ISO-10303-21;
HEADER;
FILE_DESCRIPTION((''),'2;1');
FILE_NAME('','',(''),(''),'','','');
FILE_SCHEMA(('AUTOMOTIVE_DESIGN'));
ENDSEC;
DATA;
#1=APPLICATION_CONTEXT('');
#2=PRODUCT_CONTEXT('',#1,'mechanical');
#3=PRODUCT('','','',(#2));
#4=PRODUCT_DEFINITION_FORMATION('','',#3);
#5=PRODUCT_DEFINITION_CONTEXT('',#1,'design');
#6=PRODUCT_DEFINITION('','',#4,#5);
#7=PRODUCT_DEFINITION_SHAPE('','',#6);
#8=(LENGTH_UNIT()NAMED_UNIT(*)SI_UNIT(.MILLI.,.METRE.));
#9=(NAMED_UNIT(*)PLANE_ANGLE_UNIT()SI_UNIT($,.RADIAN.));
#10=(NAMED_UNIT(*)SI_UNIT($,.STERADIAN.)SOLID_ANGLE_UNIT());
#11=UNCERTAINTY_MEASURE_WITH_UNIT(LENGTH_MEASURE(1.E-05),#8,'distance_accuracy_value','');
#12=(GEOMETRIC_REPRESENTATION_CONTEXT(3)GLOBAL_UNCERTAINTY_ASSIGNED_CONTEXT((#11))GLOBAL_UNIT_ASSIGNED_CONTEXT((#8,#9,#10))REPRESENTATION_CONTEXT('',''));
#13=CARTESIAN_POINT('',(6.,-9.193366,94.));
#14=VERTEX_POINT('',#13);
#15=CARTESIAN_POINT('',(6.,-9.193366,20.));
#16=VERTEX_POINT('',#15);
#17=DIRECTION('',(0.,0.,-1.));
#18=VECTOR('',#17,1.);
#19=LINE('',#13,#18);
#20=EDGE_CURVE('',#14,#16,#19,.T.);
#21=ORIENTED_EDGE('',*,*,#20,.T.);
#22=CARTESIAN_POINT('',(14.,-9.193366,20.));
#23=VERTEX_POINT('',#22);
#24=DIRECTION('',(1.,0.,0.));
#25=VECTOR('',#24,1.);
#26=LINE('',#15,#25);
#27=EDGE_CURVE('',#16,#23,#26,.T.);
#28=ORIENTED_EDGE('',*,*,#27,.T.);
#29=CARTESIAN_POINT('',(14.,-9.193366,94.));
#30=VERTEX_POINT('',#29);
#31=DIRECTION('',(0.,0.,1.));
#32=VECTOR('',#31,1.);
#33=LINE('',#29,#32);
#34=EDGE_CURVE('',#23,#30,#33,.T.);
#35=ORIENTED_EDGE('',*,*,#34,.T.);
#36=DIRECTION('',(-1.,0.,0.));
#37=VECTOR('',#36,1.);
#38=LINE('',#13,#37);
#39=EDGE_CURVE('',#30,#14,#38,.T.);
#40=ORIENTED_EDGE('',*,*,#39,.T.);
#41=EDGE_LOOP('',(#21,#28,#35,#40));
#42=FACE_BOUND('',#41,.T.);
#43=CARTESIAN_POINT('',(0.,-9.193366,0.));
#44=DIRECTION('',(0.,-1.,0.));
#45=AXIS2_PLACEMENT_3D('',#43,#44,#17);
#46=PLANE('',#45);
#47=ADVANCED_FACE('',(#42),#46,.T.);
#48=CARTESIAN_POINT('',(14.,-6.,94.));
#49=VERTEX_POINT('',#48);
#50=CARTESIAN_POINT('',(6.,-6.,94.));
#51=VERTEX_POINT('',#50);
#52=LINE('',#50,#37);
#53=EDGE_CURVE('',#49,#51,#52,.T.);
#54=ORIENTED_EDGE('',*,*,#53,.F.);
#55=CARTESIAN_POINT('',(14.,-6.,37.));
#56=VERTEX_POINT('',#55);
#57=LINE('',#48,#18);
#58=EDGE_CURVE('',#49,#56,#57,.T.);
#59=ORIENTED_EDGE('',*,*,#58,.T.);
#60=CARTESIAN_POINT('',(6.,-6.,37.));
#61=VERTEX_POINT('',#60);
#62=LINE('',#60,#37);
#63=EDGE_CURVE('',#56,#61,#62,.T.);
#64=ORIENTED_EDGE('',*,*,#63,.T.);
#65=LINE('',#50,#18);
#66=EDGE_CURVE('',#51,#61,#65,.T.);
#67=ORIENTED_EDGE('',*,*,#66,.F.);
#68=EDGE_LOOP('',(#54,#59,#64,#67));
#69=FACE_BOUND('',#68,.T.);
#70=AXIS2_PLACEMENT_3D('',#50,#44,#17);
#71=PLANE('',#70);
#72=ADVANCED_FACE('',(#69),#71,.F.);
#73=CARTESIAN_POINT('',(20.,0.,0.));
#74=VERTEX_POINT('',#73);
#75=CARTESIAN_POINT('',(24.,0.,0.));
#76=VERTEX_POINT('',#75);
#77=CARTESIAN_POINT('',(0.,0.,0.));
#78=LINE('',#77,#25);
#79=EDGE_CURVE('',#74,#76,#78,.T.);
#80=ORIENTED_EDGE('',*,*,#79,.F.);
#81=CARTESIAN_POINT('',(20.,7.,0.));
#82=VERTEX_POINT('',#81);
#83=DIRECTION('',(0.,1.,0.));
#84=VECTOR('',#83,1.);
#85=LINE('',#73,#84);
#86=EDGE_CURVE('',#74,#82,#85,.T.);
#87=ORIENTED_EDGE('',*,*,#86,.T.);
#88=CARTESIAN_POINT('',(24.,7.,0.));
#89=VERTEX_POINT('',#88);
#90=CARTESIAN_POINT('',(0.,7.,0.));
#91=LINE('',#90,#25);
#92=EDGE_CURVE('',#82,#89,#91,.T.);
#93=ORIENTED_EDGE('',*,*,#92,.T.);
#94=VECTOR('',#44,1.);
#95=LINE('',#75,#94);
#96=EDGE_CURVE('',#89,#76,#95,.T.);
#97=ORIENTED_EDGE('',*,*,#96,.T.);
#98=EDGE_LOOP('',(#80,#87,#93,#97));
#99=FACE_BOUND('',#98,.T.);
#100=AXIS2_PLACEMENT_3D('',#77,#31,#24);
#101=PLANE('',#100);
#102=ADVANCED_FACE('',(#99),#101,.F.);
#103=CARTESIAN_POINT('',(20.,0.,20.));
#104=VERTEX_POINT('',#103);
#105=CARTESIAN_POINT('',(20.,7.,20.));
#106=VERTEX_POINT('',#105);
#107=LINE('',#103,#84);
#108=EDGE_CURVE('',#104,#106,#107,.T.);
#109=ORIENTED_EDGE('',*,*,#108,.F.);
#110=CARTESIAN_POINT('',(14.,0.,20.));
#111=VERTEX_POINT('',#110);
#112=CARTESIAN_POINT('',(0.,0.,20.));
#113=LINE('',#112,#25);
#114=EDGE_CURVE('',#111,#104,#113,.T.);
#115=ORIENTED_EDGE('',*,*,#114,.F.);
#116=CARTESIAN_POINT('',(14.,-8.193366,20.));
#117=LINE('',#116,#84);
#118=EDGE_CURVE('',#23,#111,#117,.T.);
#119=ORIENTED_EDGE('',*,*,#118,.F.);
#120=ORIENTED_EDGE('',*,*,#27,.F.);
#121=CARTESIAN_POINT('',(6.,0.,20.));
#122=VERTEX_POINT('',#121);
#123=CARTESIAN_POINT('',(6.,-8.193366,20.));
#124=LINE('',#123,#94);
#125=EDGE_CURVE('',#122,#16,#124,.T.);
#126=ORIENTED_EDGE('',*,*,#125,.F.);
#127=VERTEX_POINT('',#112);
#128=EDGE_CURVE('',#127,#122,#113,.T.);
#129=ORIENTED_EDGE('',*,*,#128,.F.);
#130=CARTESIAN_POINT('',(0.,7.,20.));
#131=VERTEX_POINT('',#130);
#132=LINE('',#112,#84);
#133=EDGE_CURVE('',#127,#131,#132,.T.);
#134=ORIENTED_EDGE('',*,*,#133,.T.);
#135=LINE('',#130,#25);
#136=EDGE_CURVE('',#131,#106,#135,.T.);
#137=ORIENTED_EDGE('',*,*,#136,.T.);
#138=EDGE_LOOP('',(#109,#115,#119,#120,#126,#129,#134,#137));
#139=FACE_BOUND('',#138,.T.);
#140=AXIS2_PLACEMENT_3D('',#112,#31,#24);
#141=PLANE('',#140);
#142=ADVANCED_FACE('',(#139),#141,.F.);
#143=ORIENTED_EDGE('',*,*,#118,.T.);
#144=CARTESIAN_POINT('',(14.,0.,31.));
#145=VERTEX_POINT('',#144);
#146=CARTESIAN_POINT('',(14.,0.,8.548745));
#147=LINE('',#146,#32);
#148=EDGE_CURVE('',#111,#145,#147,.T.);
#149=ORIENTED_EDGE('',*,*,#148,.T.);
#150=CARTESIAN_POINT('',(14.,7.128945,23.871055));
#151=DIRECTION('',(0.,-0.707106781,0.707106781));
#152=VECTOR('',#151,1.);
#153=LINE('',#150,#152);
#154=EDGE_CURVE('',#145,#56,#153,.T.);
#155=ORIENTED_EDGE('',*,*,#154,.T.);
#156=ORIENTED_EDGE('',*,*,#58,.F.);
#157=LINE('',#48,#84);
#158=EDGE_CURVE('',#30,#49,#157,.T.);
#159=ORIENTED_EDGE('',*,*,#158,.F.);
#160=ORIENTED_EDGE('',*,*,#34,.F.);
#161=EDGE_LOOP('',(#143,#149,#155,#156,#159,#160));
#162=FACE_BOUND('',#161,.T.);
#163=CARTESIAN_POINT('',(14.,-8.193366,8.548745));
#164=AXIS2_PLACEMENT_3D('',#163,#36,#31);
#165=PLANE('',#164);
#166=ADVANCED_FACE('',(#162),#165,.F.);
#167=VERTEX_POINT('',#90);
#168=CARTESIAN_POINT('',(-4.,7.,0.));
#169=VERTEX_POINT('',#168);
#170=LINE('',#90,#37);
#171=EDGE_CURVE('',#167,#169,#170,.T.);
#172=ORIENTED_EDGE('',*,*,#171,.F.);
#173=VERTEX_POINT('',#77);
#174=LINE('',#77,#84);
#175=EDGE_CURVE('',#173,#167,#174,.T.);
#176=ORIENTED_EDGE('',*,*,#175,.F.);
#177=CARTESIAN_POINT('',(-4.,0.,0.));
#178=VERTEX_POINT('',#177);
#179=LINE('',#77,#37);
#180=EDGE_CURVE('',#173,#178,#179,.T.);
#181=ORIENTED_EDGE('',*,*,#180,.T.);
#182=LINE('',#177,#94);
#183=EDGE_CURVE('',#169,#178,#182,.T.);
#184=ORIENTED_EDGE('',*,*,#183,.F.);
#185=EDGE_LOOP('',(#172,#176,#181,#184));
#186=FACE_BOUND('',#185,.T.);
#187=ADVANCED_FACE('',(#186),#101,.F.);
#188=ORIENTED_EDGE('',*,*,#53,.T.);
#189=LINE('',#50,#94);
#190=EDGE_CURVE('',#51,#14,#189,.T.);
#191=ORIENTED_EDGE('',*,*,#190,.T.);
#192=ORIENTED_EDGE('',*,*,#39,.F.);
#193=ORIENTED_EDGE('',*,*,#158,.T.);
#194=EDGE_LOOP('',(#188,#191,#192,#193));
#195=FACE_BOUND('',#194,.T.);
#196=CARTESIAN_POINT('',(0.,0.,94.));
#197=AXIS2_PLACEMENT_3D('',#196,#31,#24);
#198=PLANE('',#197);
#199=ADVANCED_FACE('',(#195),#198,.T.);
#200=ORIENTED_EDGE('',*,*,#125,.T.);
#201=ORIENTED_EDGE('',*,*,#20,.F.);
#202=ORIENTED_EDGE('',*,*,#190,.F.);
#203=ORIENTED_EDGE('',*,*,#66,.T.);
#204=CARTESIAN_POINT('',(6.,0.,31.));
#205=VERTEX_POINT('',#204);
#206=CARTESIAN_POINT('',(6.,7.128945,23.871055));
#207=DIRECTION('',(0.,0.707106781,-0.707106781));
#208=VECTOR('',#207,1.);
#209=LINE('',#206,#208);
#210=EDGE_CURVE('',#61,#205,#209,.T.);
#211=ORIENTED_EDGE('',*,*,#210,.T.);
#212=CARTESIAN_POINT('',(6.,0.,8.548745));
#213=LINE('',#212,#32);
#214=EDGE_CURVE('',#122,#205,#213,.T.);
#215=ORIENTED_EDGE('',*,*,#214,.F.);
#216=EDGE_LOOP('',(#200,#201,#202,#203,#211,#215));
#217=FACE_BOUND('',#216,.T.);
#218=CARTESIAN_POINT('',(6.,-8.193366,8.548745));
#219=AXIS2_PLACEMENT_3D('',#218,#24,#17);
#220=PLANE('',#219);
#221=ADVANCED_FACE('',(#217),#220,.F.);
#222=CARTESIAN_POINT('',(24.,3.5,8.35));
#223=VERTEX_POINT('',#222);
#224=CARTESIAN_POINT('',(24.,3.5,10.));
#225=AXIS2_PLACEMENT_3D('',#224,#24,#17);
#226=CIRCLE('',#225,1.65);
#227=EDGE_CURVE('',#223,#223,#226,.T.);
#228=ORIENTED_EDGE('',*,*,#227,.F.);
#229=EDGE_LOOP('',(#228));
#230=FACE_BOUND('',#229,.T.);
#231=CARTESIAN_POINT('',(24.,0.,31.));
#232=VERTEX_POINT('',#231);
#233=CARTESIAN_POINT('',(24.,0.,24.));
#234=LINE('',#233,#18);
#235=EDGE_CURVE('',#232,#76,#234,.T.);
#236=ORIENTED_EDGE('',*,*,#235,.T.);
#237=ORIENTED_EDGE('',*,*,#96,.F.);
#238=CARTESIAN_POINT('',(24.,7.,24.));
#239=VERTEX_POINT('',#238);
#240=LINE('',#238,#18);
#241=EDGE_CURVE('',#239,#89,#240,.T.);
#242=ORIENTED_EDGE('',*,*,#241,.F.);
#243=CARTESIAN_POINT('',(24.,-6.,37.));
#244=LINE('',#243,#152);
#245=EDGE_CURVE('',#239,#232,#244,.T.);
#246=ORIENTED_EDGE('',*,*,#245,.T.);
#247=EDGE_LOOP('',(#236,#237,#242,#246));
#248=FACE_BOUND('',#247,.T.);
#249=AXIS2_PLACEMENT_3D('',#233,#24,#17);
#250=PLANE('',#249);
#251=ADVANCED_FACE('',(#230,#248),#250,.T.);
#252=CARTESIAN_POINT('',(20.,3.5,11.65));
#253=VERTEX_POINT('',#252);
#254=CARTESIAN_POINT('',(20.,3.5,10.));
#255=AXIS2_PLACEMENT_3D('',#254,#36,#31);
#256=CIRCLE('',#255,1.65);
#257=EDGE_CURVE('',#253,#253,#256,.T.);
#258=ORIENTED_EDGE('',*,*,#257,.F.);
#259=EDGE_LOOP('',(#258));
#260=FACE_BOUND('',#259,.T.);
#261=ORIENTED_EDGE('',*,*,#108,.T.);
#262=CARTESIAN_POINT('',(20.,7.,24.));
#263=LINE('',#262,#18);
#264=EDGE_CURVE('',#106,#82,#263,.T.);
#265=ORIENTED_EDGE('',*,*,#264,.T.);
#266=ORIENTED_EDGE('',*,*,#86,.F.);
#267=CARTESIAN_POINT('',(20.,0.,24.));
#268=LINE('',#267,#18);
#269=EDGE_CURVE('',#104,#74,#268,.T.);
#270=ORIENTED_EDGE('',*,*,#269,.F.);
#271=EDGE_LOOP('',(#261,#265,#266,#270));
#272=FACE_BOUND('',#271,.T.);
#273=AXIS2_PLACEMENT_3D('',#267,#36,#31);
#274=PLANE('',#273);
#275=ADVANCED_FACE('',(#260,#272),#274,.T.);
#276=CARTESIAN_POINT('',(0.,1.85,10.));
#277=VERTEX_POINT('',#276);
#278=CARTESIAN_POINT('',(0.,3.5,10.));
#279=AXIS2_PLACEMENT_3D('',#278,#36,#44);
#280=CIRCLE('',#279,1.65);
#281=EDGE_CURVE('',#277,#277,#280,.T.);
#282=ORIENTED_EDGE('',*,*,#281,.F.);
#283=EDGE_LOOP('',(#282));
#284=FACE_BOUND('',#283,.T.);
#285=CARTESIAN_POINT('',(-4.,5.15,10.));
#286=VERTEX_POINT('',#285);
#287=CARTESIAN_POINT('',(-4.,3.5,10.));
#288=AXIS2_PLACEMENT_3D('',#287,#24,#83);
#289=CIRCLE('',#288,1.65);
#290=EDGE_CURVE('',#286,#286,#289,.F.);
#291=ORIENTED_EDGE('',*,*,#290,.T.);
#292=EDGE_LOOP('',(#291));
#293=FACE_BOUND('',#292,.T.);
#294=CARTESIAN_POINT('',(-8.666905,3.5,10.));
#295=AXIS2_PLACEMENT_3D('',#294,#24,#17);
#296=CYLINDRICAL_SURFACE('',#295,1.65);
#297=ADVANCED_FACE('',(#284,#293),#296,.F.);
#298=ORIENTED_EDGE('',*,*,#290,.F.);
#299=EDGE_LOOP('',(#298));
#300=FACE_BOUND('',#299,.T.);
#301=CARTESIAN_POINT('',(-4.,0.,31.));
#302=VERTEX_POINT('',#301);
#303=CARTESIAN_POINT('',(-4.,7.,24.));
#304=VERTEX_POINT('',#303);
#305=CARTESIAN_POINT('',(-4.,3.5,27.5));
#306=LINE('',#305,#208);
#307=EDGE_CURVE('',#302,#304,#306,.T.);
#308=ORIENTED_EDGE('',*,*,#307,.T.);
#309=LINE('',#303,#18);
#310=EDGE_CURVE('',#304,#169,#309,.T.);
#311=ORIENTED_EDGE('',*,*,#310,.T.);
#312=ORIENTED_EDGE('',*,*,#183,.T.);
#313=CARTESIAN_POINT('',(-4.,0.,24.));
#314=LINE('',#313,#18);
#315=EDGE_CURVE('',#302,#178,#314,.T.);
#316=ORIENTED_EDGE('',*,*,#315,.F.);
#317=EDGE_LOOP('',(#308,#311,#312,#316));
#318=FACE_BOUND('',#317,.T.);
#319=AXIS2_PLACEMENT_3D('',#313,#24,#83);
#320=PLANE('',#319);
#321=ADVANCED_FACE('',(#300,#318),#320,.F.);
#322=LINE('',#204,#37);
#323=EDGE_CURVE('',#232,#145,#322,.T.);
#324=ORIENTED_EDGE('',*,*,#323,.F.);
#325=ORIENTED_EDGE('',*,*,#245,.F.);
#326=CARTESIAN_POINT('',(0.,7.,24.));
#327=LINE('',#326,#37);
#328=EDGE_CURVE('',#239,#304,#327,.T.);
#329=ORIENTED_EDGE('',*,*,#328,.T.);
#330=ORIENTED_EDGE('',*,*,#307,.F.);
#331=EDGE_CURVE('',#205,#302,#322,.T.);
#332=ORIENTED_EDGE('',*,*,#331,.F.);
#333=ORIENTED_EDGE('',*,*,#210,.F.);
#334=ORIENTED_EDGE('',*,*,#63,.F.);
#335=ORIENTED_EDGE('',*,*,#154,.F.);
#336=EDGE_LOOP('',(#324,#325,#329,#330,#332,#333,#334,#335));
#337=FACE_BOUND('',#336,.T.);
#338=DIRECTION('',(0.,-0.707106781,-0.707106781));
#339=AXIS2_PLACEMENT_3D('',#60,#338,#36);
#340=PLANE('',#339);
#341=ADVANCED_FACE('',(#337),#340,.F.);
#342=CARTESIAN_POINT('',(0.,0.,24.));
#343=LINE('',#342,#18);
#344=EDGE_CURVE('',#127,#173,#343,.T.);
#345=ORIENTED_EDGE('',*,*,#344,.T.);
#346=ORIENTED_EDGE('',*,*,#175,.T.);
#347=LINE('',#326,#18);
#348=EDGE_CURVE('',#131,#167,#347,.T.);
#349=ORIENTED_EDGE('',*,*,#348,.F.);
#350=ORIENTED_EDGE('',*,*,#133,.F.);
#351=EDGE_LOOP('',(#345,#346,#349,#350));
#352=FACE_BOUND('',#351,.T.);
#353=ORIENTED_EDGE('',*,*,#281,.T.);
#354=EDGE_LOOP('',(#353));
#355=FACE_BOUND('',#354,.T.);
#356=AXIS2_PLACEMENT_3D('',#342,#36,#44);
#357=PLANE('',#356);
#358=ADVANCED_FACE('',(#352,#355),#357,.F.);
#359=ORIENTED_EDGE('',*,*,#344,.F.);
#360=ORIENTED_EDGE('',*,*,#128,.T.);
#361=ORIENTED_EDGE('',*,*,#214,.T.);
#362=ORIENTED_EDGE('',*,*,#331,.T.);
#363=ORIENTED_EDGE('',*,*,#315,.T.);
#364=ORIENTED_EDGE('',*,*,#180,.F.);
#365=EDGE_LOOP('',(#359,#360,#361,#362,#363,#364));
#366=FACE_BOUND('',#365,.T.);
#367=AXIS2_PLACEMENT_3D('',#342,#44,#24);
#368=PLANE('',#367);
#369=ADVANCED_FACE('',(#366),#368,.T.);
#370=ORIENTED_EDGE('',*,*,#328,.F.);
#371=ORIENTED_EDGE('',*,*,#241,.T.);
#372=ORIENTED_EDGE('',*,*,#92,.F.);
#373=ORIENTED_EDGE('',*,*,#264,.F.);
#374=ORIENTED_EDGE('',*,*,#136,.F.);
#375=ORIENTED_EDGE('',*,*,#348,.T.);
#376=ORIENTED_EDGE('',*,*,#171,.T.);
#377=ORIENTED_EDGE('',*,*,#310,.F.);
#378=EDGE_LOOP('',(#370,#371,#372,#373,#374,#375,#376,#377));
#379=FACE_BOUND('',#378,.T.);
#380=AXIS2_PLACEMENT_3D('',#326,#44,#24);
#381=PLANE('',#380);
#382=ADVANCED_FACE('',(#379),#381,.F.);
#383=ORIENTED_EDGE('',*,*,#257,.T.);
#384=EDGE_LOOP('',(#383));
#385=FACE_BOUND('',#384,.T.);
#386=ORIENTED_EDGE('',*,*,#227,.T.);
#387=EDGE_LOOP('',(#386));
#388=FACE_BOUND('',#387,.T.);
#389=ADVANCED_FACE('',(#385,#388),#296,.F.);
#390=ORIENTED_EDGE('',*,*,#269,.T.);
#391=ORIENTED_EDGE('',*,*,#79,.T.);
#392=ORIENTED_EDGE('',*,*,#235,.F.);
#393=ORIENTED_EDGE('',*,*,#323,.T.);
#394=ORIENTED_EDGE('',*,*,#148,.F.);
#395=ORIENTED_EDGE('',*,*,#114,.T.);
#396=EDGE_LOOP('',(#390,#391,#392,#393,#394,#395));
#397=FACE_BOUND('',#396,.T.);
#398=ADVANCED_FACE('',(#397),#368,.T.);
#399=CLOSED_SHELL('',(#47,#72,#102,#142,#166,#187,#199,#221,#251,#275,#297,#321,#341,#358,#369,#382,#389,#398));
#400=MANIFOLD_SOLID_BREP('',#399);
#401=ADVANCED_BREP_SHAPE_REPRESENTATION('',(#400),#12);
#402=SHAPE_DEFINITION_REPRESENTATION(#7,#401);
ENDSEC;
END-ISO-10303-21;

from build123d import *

# Parameters (mm, degrees)
SKETCH1_W             = 4
SKETCH1_H             = 7
BOSS_EXTRUDE1_DEPTH   = 24
BOSS_EXTRUDE1_2_DEPTH = 24
BOSS_EXTRUDE2_START   = 20
SKETCH1_3_W           = 20
SKETCH1_3_H           = 7
BOSS_EXTRUDE2_DEPTH   = 4
SKETCH2_W             = 8
SKETCH2_H             = 2.193366053
BOSS_EXTRUDE3_DEPTH   = 70
SKETCH3_W             = 8
SKETCH3_H             = 8.193366053
BOSS_EXTRUDE4_DEPTH   = 4
CUT_EXTRUDE1_REACH    = 100.423
SKETCH4_R             = 1.65
CHAMFER1_SIZE         = 13
SKETCH5_W             = 8
SKETCH5_H             = 74
BOSS_EXTRUDE5_DEPTH   = 1


with BuildPart() as part:
    # Sketch1 → Boss-Extrude1 (new body)
    with BuildSketch(Plane.XY):
        with Locations((-2, 3.5)):
            Rectangle(SKETCH1_W, SKETCH1_H)
    extrude(amount=BOSS_EXTRUDE1_DEPTH)



with BuildPart() as body_2:
    # Sketch1 → Boss-Extrude1 2 (new body)
    with BuildSketch(Plane.XY):
        with Locations((22, 3.5)):
            Rectangle(SKETCH1_W, SKETCH1_H)
    extrude(amount=BOSS_EXTRUDE1_2_DEPTH)


with BuildPart() as part_1:
    add(part.part)

    add(body_2.part)  # Boss-Extrude2 merges body 2
    # Sketch1<3> → Boss-Extrude2 (add)
    with BuildSketch(Plane.XY.offset(BOSS_EXTRUDE2_START)):
        with Locations((10, 3.5)):
            Rectangle(SKETCH1_3_W, SKETCH1_3_H)
    extrude(amount=BOSS_EXTRUDE2_DEPTH)



with BuildPart() as body_2_2:
    # Sketch2 → Boss-Extrude3 (new body)
    with BuildSketch(Plane.XY.offset(24)):
        with Locations((10, -7.096683027)):
            Rectangle(SKETCH2_W, SKETCH2_H)
    extrude(amount=BOSS_EXTRUDE3_DEPTH)


with BuildPart() as part_2:
    add(part_1.part)

    add(body_2_2.part)  # Boss-Extrude4 merges body 2 2
    # Sketch3 → Boss-Extrude4 (add)
    with BuildSketch(Plane(origin=(0, 0, 24), x_dir=(-1, 0, 0), z_dir=(0, 0, -1))):
        with Locations((-10, -4.096683027)):
            Rectangle(SKETCH3_W, SKETCH3_H)
    extrude(amount=BOSS_EXTRUDE4_DEPTH)

    # Cut-Extrude1: up to this face of the body (flat: up to its plane)
    cut_extrude1_end = Plane(part_2.part.faces().sort_by_distance((-4, 3.5, 12))[0])
    # Sketch4 → Cut-Extrude1 (cut, up to the picked face)
    with BuildSketch(Plane(origin=(24, 0, 0), x_dir=(0, 0, -1), z_dir=(1, 0, 0)), mode=Mode.PRIVATE) as cut_extrude1_sk1:
        with Locations((-10, 3.5)):
            Circle(SKETCH4_R)
    cut_extrude1_tool1 = split(extrude(cut_extrude1_sk1.sketch, amount=-CUT_EXTRUDE1_REACH, mode=Mode.PRIVATE), bisect_by=cut_extrude1_end, keep=Keep.BOTH, mode=Mode.PRIVATE)
    add(cut_extrude1_tool1.solids().sort_by(Axis((24, 3.5, 10), (-1, 0, 0)))[0], mode=Mode.SUBTRACT)

    # Chamfer1
    chamfer1_edges = [part_2.edges().sort_by_distance(p)[0] for p in [
        (10, -6, 24),
    ]]
    chamfer(chamfer1_edges, length=CHAMFER1_SIZE - 0.0001)  # a hair under: the kernel refuses the full size

    # Sketch5 → Boss-Extrude5 (add)
    with BuildSketch(Plane.XZ.offset(8.193366053)):
        with Locations((10, 57)):
            Rectangle(SKETCH5_W, SKETCH5_H)
    extrude(amount=BOSS_EXTRUDE5_DEPTH)


solid = part_2.part
